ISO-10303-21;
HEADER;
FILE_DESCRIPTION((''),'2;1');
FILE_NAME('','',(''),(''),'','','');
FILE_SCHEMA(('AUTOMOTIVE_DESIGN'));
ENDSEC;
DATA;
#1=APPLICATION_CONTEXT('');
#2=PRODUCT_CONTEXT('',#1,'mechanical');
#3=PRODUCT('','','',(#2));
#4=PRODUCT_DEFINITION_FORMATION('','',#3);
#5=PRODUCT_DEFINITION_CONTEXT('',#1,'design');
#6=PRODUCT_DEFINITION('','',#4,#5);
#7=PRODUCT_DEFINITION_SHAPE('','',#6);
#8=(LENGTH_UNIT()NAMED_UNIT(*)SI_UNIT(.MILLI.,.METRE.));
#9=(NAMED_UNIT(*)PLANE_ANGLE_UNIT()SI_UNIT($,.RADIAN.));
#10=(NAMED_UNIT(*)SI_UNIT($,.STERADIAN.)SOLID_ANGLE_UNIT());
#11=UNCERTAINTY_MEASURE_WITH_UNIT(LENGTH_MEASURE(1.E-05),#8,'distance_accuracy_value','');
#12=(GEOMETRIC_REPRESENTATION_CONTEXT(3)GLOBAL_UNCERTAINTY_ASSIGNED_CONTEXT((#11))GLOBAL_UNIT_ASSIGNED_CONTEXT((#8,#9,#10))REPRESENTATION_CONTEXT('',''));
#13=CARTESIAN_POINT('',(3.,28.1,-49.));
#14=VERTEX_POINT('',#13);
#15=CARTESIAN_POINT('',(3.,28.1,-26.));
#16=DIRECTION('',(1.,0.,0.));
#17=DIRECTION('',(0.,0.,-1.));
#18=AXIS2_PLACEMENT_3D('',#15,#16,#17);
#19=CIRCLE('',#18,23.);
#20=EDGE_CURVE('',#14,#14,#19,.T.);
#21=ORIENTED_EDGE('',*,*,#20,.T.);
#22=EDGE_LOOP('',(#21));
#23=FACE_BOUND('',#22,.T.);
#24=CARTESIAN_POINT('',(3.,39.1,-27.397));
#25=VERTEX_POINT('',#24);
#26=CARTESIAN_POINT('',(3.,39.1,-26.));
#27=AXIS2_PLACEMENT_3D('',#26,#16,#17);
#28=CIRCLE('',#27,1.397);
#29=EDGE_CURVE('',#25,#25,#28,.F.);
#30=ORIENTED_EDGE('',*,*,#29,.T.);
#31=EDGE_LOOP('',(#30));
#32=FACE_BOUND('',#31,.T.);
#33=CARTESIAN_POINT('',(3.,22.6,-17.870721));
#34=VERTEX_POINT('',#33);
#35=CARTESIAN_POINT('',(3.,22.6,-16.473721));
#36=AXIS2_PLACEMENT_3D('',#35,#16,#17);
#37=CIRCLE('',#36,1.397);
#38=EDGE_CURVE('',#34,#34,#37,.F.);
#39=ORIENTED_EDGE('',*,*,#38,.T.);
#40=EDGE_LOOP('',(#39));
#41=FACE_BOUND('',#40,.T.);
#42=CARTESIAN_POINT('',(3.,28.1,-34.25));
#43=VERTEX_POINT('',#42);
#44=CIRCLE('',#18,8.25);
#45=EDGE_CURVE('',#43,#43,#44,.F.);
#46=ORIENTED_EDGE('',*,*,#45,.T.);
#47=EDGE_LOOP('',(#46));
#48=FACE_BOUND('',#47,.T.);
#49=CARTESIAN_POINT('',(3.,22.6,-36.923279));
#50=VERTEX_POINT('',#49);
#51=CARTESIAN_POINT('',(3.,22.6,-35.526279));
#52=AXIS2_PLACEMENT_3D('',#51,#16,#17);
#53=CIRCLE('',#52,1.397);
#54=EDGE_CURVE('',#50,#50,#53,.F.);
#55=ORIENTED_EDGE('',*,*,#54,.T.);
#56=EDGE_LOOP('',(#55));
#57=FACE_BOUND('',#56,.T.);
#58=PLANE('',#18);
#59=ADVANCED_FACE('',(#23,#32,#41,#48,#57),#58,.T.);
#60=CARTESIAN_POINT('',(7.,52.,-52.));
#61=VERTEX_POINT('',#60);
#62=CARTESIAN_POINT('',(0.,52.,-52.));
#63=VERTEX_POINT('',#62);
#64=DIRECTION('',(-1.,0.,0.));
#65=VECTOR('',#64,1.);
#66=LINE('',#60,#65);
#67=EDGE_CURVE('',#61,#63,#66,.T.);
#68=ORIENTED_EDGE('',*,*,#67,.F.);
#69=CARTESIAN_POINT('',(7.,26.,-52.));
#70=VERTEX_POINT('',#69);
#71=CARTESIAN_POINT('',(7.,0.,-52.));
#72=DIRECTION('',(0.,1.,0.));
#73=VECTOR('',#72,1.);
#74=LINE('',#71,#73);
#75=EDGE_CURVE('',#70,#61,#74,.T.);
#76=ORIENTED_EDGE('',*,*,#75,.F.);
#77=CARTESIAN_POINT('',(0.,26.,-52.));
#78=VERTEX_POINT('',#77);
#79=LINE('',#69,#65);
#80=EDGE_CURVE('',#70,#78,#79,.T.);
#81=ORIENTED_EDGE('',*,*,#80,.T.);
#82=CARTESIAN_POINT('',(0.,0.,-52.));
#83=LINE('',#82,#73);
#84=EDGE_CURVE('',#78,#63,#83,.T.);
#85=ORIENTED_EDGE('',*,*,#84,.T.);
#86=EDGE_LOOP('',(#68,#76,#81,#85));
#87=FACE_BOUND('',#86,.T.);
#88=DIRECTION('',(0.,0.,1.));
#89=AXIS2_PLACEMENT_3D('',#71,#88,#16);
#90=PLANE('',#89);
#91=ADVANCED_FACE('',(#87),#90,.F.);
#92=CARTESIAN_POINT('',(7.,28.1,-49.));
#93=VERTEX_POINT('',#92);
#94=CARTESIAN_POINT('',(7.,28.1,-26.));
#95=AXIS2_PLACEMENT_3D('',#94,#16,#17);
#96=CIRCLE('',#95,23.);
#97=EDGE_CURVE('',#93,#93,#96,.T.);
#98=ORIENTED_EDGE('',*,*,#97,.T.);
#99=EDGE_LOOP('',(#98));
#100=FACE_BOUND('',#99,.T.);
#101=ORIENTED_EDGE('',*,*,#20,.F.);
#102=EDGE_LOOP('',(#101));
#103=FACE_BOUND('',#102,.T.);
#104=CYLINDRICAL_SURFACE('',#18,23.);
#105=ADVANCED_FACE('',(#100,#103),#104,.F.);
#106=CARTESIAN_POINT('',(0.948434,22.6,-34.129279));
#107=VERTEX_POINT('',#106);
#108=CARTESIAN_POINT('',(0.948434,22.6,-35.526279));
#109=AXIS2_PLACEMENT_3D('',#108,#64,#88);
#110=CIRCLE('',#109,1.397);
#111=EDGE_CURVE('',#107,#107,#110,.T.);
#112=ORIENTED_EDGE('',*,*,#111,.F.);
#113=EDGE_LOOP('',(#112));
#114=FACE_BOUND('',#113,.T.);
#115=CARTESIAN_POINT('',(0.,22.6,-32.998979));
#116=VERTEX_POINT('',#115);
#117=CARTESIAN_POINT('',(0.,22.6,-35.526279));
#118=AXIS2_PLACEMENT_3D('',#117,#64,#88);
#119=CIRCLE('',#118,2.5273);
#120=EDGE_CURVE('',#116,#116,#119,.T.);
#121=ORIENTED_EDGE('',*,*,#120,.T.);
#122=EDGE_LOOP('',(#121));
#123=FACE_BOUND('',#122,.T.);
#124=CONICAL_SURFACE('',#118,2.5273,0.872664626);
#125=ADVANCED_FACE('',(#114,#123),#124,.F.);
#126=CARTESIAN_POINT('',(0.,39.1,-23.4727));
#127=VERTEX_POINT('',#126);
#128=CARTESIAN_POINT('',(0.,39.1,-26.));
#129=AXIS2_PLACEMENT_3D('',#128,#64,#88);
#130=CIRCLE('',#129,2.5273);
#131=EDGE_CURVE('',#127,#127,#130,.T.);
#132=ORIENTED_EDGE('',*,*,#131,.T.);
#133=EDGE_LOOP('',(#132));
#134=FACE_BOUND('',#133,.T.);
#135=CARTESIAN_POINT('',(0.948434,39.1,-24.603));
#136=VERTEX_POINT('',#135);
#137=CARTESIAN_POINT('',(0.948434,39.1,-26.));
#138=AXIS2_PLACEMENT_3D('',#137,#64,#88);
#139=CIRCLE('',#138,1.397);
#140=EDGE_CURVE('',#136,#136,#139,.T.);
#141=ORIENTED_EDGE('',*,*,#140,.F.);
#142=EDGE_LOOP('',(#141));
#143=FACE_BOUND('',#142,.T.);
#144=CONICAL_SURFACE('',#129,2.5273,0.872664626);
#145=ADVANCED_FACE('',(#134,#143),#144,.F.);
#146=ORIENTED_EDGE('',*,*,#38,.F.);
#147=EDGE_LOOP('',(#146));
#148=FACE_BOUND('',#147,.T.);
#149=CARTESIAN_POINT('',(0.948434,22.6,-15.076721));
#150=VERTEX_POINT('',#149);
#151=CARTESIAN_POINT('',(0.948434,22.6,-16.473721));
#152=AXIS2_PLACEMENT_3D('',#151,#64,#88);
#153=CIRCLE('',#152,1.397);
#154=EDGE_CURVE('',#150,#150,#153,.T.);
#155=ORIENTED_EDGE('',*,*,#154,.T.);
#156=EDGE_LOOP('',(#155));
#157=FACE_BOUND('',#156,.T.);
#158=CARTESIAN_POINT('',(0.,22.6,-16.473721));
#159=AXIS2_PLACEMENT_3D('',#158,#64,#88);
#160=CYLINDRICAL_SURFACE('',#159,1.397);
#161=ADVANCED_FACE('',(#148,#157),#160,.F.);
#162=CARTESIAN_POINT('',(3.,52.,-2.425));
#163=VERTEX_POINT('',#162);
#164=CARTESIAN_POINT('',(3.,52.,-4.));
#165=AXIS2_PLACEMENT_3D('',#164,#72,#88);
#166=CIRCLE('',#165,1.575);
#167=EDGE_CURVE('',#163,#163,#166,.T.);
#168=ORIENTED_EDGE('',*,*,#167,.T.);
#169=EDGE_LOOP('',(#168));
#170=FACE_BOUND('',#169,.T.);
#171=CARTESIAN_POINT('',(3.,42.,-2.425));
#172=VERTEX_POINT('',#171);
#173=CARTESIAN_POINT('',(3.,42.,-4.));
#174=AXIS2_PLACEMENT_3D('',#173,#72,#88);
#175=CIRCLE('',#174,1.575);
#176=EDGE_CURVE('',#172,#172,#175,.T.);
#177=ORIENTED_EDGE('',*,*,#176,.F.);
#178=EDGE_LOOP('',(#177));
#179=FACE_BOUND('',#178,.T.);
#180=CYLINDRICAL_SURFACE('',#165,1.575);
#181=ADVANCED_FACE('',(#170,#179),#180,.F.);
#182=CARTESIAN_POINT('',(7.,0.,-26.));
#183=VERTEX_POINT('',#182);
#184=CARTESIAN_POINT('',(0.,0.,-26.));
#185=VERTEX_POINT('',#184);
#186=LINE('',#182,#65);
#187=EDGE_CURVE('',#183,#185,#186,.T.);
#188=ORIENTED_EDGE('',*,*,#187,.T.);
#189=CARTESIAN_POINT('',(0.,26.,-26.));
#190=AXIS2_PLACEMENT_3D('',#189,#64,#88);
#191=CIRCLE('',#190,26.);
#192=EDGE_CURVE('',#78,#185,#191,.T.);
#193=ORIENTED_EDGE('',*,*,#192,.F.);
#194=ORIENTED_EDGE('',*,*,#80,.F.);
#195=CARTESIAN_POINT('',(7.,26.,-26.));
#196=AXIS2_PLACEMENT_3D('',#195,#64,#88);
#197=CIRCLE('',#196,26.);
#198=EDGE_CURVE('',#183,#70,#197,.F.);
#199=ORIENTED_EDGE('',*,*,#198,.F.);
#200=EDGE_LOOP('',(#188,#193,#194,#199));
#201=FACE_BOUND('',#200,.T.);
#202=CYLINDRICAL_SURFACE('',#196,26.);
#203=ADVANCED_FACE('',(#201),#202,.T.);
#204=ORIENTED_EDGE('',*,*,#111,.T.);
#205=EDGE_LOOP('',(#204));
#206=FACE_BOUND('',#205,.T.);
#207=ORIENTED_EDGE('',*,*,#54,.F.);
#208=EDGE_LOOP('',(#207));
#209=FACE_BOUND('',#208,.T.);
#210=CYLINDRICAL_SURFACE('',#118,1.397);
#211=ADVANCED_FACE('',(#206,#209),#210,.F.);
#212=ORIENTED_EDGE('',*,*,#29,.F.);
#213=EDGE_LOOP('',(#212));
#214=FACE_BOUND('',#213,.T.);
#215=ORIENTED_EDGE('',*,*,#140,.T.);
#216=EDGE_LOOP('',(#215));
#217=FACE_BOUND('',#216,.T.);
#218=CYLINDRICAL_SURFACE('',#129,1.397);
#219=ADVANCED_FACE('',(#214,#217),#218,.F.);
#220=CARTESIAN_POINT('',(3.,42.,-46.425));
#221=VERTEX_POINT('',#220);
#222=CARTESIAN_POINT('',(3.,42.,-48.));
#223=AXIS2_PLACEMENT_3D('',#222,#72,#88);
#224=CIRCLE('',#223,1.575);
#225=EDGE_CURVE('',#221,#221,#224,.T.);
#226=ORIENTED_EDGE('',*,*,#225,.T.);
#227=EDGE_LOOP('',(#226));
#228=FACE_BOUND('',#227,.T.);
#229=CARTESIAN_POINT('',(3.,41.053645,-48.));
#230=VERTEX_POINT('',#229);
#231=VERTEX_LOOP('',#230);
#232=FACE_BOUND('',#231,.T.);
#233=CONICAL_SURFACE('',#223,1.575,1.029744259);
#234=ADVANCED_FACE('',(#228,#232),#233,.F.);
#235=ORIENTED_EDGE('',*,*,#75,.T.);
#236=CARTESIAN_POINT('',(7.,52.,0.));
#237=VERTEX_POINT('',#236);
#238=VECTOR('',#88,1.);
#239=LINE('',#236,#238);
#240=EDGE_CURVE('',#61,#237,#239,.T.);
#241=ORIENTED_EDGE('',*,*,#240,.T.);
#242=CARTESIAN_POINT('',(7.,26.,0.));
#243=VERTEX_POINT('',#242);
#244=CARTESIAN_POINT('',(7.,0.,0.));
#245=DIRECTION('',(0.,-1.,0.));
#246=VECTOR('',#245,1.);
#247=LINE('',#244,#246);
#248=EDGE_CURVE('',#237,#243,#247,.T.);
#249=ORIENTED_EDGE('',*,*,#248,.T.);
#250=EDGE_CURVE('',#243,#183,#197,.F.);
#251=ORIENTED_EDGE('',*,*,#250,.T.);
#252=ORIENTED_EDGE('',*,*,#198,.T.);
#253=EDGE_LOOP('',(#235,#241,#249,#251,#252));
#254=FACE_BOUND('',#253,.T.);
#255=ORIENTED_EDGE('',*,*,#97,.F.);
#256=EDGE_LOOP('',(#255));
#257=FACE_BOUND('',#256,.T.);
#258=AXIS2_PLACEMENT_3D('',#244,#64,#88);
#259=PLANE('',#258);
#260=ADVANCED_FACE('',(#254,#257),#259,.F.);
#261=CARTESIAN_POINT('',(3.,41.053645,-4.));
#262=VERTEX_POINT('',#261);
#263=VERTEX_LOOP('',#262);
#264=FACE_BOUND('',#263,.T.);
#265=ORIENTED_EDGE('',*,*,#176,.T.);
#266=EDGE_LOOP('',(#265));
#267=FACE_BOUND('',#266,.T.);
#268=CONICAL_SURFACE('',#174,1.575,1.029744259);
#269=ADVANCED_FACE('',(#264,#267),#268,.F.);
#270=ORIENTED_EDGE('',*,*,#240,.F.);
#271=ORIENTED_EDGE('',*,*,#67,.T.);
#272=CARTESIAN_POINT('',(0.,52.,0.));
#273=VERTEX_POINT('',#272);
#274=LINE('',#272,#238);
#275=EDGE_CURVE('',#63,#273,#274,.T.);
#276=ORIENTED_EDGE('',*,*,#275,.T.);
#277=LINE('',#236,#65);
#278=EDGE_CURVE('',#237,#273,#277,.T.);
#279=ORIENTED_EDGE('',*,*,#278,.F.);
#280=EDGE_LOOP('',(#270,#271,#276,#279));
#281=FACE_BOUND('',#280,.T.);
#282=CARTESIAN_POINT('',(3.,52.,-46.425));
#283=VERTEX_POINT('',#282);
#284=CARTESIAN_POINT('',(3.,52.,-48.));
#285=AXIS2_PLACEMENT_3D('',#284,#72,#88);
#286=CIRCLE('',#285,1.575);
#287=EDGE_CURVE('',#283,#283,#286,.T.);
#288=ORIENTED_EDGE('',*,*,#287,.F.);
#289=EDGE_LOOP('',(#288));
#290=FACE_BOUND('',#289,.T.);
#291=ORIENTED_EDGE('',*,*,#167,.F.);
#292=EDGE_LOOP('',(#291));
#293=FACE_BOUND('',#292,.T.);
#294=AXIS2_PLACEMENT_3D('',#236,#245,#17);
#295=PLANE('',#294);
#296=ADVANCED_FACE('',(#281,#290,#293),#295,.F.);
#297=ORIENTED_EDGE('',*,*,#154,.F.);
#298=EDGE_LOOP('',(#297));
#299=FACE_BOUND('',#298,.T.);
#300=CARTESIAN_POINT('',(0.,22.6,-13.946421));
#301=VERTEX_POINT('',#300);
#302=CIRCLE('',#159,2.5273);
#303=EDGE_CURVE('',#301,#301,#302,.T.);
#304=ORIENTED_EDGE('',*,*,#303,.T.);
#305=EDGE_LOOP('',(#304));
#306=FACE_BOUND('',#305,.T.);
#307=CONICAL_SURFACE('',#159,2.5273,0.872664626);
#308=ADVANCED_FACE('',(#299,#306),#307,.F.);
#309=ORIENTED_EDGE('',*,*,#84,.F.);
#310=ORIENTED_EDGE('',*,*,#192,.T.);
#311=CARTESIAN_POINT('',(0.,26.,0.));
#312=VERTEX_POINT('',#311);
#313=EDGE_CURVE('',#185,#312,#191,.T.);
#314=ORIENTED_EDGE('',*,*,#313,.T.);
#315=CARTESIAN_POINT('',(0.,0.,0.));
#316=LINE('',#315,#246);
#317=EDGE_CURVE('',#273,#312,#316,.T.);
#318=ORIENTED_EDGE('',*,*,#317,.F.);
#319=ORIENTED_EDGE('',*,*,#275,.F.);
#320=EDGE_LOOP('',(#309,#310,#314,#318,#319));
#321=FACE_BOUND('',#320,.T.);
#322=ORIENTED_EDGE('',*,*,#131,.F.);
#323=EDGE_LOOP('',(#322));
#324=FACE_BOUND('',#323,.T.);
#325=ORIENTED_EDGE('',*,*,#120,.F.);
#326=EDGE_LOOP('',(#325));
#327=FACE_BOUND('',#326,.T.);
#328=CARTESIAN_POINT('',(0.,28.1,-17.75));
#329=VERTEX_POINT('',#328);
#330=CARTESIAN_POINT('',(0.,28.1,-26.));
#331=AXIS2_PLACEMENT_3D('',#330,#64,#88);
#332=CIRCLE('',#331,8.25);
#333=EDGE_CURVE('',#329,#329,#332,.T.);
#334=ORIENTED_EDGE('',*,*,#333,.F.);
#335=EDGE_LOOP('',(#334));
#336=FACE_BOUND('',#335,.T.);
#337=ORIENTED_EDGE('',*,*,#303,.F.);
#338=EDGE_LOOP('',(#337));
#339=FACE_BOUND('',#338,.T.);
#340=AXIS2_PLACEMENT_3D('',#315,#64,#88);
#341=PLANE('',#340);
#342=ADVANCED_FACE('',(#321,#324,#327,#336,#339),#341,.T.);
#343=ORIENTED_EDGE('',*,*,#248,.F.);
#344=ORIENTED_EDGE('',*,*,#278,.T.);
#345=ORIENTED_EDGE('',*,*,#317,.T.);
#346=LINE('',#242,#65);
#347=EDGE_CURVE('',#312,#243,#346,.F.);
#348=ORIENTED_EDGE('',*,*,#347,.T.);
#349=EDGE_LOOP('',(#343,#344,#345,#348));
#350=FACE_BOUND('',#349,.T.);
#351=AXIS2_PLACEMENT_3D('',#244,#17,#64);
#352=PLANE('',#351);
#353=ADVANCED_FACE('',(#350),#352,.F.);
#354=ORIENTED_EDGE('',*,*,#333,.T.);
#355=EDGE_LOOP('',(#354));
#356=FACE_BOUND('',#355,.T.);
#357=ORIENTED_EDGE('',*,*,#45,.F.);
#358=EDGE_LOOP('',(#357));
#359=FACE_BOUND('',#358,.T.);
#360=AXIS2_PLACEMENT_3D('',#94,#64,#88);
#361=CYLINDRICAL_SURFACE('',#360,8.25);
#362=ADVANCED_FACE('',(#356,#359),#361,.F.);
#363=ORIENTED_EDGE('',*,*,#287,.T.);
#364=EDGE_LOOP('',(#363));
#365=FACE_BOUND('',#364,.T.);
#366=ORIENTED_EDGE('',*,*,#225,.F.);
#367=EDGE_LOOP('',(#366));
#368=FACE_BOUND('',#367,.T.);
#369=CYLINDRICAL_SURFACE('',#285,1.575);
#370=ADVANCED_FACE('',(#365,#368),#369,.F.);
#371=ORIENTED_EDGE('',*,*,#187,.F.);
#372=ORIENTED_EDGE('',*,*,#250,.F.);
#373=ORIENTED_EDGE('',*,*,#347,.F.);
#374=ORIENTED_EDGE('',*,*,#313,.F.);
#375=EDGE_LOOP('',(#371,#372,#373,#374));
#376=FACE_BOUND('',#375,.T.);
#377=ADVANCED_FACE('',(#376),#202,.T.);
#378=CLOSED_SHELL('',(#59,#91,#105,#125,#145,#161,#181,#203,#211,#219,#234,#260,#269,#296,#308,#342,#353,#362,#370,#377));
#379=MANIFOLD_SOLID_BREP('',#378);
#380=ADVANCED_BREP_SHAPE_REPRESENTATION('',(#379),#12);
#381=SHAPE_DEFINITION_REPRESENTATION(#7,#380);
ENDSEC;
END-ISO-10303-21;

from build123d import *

# Parameters (mm, degrees)
ESBO_O1_W                                            = 52
ESBO_O1_H                                            = 52
RESSALTO_EXTRUS_O1_DEPTH                             = 7
ESBO_O2_R                                            = 8.25
CORTE_EXTRUS_O1_DEPTH                                = 74.87151007
ESCAREADO_PARA_PARAFUSO_DE_M_QUINA_COM_C_D           = 2.794
ESCAREADO_PARA_PARAFUSO_DE_M_QUINA_COM_C_CSINK_D     = 5.0546
ESCAREADO_PARA_PARAFUSO_DE_M_QUINA_COM_C_CSINK_ANGLE = 100
PADR_OCIRCULAR1_COUNT                                = 3
ESBO_O27_R                                           = 23
CORTE_EXTRUS_O5_DEPTH                                = 4
FILETE1_R                                            = 26
FURO_ROSCADO_PARA_CONDU_TE_DE_M3X0_51_D              = 3.15
FURO_ROSCADO_PARA_CONDU_TE_DE_M3X0_51_DEPTH          = 10
FURO_ROSCADO_PARA_CONDU_TE_DE_M3X0_51_TIP            = 0.946355475


with BuildPart() as part:
    # Esboço1 → Ressalto-extrusão1 (new body)
    with BuildSketch(Plane(origin=(0, 0, 0), x_dir=(0, 0, -1), z_dir=(1, 0, 0))):
        with Locations((26, 26)):
            Rectangle(ESBO_O1_W, ESBO_O1_H)
    extrude(amount=RESSALTO_EXTRUS_O1_DEPTH)

    # Esboço2 → Corte-extrusão1 (cut, through all)
    with BuildSketch(Plane.ZY):
        with Locations((-26, 28.1)):
            Circle(ESBO_O2_R)
    extrude(amount=-CORTE_EXTRUS_O1_DEPTH, mode=Mode.SUBTRACT)

    # Escareado para parafuso de máquina com cabeça chata (100) de #32 (through all)
    with Locations(Plane.ZY):
        with Locations((-26, 39.1)):
            escareado_para_parafuso_de_m_quina_com_c = CounterSinkHole(ESCAREADO_PARA_PARAFUSO_DE_M_QUINA_COM_C_D / 2, ESCAREADO_PARA_PARAFUSO_DE_M_QUINA_COM_C_CSINK_D / 2, counter_sink_angle=ESCAREADO_PARA_PARAFUSO_DE_M_QUINA_COM_C_CSINK_ANGLE)

    # PadrãoCircular1: Escareado para parafuso de máquina com cabeça chata (100) de #32 ×3 about axis
    padr_ocircular1_axis = Axis((0, 28.1, -26), (1, 0, 0))
    for i in range(1, PADR_OCIRCULAR1_COUNT):
        add(escareado_para_parafuso_de_m_quina_com_c.rotate(padr_ocircular1_axis, i * 360 / PADR_OCIRCULAR1_COUNT), mode=Mode.SUBTRACT)

    # Esboço27 → Corte-extrusão5 (cut)
    with BuildSketch(Plane(origin=(7, 0, 0), x_dir=(0, 0, -1), z_dir=(1, 0, 0))):
        with Locations((26, 28.1)):
            Circle(ESBO_O27_R)
    extrude(amount=-CORTE_EXTRUS_O5_DEPTH, mode=Mode.SUBTRACT)

    # Filete1
    filete1_edges = [part.edges().sort_by_distance(p)[0] for p in [
        (3.5, 0, -52),
        (3.5, 0, 0),
    ]]
    fillet(filete1_edges, radius=FILETE1_R - 0.0001)  # a hair under: the kernel refuses the full size

    # Furo roscado para conduíte de M3x0.51
    with Locations(Plane(origin=(0, 52, 0), x_dir=(1, 0, 0), z_dir=(0, 1, 0))):
        with Locations((3, 48), (3, 4)):
            Hole(FURO_ROSCADO_PARA_CONDU_TE_DE_M3X0_51_D / 2, depth=FURO_ROSCADO_PARA_CONDU_TE_DE_M3X0_51_DEPTH)
            with Locations((0, 0, -(FURO_ROSCADO_PARA_CONDU_TE_DE_M3X0_51_DEPTH + FURO_ROSCADO_PARA_CONDU_TE_DE_M3X0_51_TIP / 2))):  # 118° drill point
                Cone(0, FURO_ROSCADO_PARA_CONDU_TE_DE_M3X0_51_D / 2, FURO_ROSCADO_PARA_CONDU_TE_DE_M3X0_51_TIP, mode=Mode.SUBTRACT)


solid = part.part
